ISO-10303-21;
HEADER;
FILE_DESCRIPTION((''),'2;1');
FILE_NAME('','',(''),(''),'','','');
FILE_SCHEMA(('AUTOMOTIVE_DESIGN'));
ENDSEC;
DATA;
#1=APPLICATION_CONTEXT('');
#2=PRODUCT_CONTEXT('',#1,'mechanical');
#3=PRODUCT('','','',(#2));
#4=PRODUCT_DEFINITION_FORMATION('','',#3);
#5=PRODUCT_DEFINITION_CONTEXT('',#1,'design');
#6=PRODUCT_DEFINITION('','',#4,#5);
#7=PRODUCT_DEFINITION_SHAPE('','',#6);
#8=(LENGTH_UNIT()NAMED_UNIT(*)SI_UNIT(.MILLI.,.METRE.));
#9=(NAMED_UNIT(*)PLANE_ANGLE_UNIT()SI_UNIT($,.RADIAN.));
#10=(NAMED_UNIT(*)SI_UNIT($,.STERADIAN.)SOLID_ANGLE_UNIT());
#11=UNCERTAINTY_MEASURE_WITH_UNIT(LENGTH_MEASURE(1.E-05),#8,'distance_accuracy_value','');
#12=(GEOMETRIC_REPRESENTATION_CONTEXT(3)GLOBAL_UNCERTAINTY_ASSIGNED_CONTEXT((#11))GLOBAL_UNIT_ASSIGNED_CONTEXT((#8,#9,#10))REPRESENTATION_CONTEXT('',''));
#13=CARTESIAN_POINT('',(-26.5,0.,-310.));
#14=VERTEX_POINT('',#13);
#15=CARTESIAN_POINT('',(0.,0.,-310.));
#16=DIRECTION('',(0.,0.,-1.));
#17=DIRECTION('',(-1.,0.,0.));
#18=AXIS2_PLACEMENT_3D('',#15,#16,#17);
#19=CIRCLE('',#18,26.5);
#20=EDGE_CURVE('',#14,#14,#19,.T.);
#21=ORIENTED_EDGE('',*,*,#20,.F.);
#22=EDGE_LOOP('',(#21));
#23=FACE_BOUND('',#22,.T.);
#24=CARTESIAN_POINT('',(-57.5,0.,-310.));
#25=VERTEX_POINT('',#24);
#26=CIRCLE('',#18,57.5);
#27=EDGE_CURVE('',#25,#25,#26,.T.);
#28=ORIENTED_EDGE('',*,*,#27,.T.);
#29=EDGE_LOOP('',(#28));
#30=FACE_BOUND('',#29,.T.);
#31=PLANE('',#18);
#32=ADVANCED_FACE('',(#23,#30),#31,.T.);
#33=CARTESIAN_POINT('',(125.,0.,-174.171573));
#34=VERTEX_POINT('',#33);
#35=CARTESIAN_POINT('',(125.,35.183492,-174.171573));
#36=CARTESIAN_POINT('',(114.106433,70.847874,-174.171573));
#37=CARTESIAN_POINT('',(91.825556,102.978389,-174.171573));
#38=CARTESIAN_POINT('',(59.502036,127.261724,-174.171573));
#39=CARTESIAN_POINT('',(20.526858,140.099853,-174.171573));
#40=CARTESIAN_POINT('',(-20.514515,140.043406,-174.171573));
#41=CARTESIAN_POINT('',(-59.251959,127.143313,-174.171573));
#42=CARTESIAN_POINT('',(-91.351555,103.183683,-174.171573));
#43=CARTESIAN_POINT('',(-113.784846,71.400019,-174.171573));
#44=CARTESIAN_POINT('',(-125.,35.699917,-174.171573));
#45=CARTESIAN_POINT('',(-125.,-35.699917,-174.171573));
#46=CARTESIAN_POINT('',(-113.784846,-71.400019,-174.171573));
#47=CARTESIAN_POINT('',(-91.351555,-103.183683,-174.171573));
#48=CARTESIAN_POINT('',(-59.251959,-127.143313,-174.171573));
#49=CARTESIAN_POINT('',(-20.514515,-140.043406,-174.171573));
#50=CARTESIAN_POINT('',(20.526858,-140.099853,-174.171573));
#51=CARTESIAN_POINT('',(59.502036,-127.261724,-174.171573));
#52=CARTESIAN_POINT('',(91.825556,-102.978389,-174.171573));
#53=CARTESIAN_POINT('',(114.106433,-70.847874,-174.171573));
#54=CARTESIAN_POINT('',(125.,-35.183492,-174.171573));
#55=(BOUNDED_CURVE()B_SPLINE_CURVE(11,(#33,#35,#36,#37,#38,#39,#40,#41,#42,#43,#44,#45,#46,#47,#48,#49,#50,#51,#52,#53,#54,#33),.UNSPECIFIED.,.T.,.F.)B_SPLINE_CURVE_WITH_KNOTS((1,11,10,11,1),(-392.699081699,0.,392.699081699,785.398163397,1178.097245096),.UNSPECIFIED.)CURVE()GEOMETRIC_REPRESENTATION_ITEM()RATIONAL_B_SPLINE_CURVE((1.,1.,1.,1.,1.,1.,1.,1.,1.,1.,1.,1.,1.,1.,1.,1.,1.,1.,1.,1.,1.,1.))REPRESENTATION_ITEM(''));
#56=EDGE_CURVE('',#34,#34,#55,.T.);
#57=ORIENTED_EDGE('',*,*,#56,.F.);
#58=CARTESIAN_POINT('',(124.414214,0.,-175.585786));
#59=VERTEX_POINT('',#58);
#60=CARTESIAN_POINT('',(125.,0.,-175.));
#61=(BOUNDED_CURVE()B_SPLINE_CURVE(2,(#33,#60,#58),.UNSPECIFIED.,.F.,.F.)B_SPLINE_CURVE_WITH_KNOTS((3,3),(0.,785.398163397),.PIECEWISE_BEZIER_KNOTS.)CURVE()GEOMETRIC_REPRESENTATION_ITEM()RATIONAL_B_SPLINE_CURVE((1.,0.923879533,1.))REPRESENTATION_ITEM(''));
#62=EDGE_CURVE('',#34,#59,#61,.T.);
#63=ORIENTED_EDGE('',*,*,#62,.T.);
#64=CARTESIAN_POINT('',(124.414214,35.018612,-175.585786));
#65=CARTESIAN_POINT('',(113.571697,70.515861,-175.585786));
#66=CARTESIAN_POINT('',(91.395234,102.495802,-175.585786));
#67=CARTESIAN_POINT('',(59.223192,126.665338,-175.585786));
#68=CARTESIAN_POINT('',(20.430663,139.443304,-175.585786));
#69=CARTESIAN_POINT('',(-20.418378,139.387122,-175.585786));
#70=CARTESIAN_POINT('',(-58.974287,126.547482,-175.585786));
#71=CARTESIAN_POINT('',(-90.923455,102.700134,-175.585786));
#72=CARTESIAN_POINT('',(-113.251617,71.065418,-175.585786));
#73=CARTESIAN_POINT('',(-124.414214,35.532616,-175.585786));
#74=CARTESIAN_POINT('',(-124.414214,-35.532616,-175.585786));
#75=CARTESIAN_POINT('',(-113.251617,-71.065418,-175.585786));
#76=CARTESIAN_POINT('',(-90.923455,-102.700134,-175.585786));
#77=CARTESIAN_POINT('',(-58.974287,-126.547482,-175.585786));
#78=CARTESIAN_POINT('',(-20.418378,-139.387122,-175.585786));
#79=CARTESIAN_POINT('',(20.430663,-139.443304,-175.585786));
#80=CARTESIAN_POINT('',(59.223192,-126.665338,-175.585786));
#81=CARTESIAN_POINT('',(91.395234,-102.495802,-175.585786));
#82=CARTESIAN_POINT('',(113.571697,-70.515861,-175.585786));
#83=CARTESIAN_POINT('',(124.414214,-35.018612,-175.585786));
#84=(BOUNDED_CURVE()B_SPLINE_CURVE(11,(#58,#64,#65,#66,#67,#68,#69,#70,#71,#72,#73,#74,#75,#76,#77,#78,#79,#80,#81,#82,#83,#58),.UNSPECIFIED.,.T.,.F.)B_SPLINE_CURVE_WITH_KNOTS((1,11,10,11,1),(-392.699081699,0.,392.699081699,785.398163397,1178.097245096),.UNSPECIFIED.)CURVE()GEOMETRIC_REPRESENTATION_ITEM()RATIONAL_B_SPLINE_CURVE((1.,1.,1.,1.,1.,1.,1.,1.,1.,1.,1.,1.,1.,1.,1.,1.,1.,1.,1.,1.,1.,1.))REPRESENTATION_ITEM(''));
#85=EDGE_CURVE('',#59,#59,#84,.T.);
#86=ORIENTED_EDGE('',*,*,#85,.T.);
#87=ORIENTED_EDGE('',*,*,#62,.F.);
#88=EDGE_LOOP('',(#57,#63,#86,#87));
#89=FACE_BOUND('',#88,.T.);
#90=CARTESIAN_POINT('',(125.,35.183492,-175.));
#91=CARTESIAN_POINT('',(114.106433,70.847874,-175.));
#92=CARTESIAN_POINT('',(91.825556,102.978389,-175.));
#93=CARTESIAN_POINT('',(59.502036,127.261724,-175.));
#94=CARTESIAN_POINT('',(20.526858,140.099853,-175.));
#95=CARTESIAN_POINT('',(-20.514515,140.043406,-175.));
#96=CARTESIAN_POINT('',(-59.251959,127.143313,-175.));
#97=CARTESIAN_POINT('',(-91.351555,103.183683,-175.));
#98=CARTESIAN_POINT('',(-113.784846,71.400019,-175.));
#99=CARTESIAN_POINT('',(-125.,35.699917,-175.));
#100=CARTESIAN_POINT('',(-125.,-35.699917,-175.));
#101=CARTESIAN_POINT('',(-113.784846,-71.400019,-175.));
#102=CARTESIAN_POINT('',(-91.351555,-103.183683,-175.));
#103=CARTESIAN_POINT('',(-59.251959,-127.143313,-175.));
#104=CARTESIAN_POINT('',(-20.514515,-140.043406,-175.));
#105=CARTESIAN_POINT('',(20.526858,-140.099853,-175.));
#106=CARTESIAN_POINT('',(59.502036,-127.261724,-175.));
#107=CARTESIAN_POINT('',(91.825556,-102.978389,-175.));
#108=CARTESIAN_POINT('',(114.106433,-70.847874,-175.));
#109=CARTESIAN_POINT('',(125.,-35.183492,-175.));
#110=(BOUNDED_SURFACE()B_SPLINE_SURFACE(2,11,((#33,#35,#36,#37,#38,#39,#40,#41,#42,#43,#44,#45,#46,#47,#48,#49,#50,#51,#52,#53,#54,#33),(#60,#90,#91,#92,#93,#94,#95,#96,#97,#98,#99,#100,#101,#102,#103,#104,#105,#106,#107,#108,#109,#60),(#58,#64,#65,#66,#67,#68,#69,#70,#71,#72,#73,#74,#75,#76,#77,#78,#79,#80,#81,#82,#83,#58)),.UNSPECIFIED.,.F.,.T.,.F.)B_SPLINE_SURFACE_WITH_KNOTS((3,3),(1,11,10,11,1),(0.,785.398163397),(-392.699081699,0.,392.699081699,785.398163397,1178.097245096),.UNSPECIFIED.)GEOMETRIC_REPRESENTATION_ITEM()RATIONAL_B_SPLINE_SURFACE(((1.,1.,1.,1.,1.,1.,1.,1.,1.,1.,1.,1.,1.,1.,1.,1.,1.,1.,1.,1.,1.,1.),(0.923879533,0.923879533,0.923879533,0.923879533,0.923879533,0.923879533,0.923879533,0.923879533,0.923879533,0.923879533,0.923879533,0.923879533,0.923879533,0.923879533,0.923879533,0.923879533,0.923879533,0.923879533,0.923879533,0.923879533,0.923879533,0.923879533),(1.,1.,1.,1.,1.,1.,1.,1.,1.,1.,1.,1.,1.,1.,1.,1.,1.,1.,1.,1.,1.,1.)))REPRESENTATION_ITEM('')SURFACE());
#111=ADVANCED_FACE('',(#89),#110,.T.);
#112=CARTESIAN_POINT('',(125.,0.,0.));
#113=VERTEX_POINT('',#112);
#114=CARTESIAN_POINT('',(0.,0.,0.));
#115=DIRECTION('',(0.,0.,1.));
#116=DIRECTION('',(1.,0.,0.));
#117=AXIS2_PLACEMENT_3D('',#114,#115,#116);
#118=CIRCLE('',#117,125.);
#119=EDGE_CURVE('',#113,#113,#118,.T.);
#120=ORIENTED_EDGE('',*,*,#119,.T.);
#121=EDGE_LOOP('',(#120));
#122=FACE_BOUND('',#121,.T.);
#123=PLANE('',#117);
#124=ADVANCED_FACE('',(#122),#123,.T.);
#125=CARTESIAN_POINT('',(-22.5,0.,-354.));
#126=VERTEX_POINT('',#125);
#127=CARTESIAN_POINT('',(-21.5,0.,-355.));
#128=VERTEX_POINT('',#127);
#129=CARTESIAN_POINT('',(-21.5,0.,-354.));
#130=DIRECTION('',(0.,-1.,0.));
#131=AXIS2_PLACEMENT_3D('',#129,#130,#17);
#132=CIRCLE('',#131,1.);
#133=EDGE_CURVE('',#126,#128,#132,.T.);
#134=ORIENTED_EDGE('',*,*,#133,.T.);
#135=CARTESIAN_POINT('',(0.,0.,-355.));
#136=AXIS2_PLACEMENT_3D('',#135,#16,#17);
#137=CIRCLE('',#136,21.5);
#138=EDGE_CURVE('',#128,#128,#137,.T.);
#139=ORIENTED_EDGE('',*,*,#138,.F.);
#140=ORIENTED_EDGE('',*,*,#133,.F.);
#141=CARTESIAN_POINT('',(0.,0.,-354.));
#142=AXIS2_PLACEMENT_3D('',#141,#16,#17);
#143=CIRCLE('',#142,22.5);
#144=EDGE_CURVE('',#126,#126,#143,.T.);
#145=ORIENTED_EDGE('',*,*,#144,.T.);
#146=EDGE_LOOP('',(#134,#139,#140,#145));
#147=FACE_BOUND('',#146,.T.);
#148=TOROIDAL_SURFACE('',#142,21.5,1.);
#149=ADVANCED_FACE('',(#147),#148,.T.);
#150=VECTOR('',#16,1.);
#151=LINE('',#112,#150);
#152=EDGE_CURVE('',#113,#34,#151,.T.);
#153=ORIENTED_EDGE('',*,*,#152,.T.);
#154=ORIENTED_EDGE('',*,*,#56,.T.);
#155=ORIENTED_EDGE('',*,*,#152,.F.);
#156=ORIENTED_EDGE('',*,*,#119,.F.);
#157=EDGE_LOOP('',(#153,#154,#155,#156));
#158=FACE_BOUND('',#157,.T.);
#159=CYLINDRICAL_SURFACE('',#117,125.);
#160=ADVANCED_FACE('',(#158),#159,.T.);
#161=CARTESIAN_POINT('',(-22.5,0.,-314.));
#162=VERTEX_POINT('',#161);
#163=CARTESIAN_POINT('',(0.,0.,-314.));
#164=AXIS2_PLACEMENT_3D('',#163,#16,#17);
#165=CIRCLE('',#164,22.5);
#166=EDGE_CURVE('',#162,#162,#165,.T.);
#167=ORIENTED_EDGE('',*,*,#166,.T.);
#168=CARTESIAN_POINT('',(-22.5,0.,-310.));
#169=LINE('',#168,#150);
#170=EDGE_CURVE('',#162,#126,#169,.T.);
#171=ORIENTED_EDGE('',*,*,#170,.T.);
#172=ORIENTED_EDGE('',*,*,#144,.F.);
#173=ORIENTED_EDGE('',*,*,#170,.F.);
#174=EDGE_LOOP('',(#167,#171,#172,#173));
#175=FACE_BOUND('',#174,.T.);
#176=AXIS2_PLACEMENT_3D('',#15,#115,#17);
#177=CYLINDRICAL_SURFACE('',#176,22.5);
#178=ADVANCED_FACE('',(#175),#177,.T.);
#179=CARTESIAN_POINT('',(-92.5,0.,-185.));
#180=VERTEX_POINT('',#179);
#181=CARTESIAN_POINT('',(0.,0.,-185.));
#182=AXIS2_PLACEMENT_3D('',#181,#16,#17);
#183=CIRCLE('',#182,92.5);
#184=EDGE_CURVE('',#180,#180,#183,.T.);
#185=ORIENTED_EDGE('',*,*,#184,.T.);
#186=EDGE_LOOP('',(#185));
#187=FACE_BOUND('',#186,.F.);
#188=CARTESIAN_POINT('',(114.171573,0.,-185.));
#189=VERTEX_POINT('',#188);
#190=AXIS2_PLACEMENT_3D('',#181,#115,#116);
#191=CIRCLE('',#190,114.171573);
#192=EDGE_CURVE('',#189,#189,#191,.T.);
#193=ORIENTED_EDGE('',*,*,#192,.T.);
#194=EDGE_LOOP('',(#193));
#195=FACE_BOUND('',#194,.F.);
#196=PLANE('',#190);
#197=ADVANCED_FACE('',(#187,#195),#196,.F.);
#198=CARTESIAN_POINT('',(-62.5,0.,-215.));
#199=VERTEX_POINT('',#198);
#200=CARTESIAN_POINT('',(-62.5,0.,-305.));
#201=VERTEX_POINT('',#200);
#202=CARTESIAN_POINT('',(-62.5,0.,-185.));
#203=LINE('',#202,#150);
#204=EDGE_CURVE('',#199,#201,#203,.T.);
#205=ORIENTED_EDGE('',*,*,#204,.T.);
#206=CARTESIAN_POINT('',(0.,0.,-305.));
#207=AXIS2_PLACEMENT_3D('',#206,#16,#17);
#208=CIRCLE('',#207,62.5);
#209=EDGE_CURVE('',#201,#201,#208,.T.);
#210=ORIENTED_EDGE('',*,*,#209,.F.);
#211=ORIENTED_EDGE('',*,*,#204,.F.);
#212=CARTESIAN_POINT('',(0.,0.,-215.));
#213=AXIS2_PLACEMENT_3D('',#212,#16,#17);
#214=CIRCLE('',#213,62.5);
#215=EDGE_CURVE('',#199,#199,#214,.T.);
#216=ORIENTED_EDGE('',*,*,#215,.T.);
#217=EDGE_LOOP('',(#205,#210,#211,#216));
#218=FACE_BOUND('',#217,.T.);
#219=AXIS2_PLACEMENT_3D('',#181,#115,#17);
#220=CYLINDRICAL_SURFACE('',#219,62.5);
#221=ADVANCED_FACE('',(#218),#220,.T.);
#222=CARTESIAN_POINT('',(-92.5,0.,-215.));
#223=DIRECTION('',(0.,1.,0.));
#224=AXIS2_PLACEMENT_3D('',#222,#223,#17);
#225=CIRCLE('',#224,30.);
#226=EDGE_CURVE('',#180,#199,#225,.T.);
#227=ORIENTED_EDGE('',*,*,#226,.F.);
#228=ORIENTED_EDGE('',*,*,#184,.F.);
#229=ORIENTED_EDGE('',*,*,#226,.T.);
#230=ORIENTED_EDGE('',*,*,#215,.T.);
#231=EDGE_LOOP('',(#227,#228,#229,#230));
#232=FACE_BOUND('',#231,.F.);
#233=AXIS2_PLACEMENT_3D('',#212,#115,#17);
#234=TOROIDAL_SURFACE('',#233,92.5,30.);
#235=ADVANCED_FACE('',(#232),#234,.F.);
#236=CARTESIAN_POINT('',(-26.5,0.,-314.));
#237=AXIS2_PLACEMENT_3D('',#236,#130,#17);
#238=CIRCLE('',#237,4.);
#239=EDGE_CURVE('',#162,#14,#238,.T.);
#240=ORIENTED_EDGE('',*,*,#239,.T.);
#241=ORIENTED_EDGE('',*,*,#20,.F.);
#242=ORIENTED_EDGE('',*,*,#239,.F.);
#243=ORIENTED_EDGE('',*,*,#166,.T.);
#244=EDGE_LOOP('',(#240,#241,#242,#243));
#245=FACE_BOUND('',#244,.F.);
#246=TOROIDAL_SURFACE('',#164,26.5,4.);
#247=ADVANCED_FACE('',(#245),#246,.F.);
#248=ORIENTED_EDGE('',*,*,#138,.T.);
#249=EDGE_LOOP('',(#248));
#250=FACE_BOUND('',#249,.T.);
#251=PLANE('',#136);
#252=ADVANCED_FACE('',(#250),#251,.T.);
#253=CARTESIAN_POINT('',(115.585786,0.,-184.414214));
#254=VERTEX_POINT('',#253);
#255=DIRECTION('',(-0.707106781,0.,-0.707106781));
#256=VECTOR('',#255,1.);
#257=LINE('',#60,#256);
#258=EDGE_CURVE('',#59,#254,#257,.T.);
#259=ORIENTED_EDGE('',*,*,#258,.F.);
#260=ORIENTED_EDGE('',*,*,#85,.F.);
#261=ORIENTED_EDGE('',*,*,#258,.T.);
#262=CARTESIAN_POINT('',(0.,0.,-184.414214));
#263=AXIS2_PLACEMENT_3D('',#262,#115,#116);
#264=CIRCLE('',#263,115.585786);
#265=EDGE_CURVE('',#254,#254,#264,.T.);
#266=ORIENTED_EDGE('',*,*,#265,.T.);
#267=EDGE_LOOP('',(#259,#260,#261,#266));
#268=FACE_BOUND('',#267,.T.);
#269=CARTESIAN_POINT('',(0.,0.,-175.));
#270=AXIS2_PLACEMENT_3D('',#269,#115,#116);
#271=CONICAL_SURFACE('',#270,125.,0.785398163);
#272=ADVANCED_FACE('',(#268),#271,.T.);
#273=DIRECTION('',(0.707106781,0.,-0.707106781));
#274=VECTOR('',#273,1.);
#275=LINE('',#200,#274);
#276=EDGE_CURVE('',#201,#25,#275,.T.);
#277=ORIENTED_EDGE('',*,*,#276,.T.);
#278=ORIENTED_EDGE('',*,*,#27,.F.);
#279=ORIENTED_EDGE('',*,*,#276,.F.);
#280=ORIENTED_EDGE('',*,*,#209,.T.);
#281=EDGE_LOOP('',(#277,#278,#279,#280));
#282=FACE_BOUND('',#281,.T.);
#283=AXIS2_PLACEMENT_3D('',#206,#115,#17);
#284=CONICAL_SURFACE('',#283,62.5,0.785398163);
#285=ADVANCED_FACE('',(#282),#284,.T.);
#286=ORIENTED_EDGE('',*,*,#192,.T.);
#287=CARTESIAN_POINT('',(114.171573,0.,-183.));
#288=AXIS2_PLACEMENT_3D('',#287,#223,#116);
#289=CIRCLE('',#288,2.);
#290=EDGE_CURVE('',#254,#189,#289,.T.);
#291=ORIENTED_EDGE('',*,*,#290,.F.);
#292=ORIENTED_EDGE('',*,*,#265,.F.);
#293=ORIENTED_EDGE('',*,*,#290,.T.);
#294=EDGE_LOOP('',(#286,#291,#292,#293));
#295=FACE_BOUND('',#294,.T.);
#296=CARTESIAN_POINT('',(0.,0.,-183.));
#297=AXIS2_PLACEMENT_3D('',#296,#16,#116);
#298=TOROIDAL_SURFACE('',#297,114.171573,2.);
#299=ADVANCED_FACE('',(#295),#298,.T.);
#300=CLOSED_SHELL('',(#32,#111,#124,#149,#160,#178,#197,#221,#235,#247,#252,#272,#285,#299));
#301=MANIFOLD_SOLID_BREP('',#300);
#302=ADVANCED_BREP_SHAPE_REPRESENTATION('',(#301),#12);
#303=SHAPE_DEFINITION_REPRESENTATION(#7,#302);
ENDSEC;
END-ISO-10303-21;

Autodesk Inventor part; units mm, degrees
ref_plane "YZ Plane" through (0, 0, 0) normal (1, 0, 0) x (0, 1, 0)
ref_plane "XZ Plane" through (0, 0, 0) normal (0, 1, 0) x (-1, 0, 0)
ref_plane "XY Plane" through (0, 0, 0) normal (0, 0, 1) x (1, 0, 0)
sketch "Boceto1" plane through (0, 0, 0) normal (0, 0, 1) x (1, 0, 0)
  circle A0 centre (0, 0) radius 125
  dimension "d0" = 250
extrude "Extrusión1" add sketch "Boceto1" against normal blind 185
sketch "Boceto2" plane through (0, 0, -185) normal (0, 0, -1) x (-1, 0, 0)
  circle A0 centre (0, 0) radius 62.5
  dimension "d3" = 125
extrude "Extrusión2" add sketch "Boceto2" along normal blind 125
sketch "Boceto3" plane through (0, 0, -310) normal (0, 0, -1) x (-1, 0, 0)
  circle A0 centre (0, 0) radius 22.5
  dimension "d6" = 45
extrude "Extrusión3" add sketch "Boceto3" along normal blind 45
chamfer "Chaflán1" distance 10 angle 45 1 edges at (-125, 0, -185)
fillet "Empalme1" radius 2 2 edges at (-125, 0, -175) (-115, 0, -185)
fillet "Empalme de cara1" radius 30 1 edges at (62.5, 0, -185)
chamfer "Chaflán2" distance 5 angle 45 1 edges at (62.5, 0, -310)
fillet "Empalme2" radius 1 1 edges at (22.5, 0, -355)
fillet "Empalme de cara2" radius 4 1 edges at (22.5, 0, -310)
equation "\"d3\" = 0.5 * d0"
properties part number "eje (bolt)"
